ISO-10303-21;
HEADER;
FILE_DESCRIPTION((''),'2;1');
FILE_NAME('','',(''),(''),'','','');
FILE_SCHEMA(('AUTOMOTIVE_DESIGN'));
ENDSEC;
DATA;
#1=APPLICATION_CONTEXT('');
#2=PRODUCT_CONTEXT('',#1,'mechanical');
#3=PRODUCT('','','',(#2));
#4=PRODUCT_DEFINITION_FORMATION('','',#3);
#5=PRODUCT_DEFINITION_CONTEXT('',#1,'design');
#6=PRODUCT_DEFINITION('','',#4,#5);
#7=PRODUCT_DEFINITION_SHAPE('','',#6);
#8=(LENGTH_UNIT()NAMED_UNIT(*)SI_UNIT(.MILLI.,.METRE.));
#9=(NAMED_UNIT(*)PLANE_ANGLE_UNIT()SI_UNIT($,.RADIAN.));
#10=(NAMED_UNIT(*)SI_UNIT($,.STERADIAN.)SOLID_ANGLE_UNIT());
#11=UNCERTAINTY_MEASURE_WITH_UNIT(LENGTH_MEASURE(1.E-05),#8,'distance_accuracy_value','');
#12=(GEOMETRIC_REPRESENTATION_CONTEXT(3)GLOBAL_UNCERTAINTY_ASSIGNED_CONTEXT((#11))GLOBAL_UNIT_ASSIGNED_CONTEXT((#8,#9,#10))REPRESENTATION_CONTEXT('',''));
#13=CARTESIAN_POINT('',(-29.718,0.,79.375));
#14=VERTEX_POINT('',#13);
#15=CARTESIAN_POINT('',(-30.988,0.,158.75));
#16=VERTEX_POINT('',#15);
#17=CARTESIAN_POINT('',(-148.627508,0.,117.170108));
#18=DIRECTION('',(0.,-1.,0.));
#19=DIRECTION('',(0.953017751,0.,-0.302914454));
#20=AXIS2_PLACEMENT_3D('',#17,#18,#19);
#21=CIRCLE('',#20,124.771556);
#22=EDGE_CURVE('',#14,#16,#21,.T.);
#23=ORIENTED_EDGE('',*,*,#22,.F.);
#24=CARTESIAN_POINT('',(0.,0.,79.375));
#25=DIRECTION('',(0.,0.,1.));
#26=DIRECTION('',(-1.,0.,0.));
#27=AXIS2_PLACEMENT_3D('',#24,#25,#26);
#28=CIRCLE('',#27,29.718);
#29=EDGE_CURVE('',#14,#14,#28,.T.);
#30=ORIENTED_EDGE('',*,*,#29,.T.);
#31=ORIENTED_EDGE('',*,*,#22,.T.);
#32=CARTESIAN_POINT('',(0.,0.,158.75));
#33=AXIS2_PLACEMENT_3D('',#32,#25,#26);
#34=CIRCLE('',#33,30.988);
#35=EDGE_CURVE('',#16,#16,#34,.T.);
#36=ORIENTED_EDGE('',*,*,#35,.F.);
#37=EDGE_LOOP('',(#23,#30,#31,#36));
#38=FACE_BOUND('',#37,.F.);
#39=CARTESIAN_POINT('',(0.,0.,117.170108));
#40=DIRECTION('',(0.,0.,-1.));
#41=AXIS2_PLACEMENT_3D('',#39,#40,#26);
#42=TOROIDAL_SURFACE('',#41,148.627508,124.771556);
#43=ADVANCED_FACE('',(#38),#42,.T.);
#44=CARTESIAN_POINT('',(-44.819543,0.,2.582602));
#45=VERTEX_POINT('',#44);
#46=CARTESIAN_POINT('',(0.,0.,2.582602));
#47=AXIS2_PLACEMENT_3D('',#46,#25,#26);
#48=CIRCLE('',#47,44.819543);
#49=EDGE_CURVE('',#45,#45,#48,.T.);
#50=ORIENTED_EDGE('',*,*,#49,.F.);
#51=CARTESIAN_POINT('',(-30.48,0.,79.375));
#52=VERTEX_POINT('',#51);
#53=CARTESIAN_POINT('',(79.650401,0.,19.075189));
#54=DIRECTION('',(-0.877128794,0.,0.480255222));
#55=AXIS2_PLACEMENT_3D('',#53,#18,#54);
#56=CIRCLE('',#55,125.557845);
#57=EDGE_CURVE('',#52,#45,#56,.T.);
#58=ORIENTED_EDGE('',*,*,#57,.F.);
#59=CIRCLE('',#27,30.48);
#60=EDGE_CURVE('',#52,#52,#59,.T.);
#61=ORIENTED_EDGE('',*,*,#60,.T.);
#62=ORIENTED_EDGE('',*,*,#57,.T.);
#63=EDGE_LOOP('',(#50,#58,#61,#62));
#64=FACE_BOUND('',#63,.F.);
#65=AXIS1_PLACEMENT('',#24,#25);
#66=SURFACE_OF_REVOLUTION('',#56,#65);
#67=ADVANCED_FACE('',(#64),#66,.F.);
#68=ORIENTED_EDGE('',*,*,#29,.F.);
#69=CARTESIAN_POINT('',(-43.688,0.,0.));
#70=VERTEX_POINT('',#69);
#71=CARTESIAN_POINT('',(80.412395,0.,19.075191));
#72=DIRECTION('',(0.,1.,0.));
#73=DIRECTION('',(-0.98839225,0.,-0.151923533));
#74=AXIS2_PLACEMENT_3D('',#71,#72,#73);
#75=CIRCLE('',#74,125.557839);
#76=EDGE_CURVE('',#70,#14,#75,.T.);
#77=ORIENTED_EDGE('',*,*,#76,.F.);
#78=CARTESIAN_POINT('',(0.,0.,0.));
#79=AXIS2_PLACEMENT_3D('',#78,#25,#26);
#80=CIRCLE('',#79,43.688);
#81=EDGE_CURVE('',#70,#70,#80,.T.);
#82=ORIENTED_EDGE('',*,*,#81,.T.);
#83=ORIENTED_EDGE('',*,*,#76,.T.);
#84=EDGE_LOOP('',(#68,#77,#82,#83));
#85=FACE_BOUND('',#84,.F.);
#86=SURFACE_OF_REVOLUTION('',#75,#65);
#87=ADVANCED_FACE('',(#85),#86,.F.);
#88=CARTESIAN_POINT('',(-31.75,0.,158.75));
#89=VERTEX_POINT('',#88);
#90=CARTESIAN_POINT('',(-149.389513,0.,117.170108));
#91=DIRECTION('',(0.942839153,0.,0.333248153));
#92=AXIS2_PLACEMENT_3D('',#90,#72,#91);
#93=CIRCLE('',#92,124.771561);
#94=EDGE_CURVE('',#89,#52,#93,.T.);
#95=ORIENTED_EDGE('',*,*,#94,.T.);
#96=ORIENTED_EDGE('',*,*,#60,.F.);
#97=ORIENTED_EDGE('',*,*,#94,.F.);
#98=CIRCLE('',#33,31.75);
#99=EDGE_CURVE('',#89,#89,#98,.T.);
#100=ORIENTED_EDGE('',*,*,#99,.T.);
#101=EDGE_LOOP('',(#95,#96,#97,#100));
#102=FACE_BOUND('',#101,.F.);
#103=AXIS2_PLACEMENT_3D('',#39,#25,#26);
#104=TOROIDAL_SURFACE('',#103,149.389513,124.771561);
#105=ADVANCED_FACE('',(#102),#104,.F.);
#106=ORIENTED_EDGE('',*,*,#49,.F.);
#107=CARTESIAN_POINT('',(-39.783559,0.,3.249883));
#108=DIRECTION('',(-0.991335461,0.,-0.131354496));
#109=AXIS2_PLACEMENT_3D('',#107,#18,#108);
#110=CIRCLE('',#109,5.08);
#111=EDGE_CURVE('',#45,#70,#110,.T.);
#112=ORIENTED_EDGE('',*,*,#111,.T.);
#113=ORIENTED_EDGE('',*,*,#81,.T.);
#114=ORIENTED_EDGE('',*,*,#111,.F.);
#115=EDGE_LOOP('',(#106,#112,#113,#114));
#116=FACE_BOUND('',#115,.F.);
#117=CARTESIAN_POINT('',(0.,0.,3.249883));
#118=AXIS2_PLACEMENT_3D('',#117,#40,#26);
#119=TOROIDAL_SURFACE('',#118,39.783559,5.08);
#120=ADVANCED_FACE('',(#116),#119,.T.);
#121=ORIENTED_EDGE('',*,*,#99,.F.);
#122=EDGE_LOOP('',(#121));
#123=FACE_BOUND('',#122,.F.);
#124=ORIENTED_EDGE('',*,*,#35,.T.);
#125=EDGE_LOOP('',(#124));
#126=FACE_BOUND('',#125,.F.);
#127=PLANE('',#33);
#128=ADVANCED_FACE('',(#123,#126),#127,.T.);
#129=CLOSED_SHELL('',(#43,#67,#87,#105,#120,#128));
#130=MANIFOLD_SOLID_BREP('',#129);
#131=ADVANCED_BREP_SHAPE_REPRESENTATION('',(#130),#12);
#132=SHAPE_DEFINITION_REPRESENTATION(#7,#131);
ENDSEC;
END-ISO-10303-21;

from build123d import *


# Not quite as in the source:
# - a fillet or chamfer that OpenCascade refuses, or shapes differently, is made with other operations: its cross-section is extruded or revolved along the edge and cut away or added


with BuildPart() as f1:
    # F0 (on Front) → F1 (revolve)
    with BuildSketch(Plane.XZ):
        with BuildLine():
            Line((-30.48, 79.375), (-29.718, 79.375))
            ThreePointArc((-29.718, 79.375), (-23.8719193553, 119.1661972903), (-30.988, 158.75))
            Line((-30.988, 158.75), (-31.75, 158.75))
            ThreePointArc((-31.75, 158.75), (-24.6339195933, 119.1661972865), (-30.48, 79.375))
        make_face()
        with BuildLine():
            Line((-44.45, 0), (-43.688, 0))
            ThreePointArc((-43.688, 0), (-43.2448466189, 40.8388650049), (-29.718, 79.375))
            Line((-29.718, 79.375), (-30.48, 79.375))
            ThreePointArc((-30.48, 79.375), (-44.0068462925, 40.8388649475), (-44.45, 0))
        make_face()
    revolve(axis=Axis((0, 0, 79.375), (0, 0, 1)))

    # F2: fillet of radius 5.08 on 1 edges, made by hand

    # F2_s1 → F2_t2 (revolve, cut)
    with BuildSketch(Plane.XZ):
        with BuildLine():
            ThreePointArc((-44.8195429295, 2.5826020544), (-44.4365427465, 1.2112215), (-43.688, 0))
            Line((-43.688, 0), (-44.45, 0))
            ThreePointArc((-44.45, 0), (-44.6414794787, 1.2903411816), (-44.8195429295, 2.5826020544))
        make_face()
    revolve(axis=Axis((0, 0, 0), (0, 0, 1)), mode=Mode.SUBTRACT)


solid = f1.part
